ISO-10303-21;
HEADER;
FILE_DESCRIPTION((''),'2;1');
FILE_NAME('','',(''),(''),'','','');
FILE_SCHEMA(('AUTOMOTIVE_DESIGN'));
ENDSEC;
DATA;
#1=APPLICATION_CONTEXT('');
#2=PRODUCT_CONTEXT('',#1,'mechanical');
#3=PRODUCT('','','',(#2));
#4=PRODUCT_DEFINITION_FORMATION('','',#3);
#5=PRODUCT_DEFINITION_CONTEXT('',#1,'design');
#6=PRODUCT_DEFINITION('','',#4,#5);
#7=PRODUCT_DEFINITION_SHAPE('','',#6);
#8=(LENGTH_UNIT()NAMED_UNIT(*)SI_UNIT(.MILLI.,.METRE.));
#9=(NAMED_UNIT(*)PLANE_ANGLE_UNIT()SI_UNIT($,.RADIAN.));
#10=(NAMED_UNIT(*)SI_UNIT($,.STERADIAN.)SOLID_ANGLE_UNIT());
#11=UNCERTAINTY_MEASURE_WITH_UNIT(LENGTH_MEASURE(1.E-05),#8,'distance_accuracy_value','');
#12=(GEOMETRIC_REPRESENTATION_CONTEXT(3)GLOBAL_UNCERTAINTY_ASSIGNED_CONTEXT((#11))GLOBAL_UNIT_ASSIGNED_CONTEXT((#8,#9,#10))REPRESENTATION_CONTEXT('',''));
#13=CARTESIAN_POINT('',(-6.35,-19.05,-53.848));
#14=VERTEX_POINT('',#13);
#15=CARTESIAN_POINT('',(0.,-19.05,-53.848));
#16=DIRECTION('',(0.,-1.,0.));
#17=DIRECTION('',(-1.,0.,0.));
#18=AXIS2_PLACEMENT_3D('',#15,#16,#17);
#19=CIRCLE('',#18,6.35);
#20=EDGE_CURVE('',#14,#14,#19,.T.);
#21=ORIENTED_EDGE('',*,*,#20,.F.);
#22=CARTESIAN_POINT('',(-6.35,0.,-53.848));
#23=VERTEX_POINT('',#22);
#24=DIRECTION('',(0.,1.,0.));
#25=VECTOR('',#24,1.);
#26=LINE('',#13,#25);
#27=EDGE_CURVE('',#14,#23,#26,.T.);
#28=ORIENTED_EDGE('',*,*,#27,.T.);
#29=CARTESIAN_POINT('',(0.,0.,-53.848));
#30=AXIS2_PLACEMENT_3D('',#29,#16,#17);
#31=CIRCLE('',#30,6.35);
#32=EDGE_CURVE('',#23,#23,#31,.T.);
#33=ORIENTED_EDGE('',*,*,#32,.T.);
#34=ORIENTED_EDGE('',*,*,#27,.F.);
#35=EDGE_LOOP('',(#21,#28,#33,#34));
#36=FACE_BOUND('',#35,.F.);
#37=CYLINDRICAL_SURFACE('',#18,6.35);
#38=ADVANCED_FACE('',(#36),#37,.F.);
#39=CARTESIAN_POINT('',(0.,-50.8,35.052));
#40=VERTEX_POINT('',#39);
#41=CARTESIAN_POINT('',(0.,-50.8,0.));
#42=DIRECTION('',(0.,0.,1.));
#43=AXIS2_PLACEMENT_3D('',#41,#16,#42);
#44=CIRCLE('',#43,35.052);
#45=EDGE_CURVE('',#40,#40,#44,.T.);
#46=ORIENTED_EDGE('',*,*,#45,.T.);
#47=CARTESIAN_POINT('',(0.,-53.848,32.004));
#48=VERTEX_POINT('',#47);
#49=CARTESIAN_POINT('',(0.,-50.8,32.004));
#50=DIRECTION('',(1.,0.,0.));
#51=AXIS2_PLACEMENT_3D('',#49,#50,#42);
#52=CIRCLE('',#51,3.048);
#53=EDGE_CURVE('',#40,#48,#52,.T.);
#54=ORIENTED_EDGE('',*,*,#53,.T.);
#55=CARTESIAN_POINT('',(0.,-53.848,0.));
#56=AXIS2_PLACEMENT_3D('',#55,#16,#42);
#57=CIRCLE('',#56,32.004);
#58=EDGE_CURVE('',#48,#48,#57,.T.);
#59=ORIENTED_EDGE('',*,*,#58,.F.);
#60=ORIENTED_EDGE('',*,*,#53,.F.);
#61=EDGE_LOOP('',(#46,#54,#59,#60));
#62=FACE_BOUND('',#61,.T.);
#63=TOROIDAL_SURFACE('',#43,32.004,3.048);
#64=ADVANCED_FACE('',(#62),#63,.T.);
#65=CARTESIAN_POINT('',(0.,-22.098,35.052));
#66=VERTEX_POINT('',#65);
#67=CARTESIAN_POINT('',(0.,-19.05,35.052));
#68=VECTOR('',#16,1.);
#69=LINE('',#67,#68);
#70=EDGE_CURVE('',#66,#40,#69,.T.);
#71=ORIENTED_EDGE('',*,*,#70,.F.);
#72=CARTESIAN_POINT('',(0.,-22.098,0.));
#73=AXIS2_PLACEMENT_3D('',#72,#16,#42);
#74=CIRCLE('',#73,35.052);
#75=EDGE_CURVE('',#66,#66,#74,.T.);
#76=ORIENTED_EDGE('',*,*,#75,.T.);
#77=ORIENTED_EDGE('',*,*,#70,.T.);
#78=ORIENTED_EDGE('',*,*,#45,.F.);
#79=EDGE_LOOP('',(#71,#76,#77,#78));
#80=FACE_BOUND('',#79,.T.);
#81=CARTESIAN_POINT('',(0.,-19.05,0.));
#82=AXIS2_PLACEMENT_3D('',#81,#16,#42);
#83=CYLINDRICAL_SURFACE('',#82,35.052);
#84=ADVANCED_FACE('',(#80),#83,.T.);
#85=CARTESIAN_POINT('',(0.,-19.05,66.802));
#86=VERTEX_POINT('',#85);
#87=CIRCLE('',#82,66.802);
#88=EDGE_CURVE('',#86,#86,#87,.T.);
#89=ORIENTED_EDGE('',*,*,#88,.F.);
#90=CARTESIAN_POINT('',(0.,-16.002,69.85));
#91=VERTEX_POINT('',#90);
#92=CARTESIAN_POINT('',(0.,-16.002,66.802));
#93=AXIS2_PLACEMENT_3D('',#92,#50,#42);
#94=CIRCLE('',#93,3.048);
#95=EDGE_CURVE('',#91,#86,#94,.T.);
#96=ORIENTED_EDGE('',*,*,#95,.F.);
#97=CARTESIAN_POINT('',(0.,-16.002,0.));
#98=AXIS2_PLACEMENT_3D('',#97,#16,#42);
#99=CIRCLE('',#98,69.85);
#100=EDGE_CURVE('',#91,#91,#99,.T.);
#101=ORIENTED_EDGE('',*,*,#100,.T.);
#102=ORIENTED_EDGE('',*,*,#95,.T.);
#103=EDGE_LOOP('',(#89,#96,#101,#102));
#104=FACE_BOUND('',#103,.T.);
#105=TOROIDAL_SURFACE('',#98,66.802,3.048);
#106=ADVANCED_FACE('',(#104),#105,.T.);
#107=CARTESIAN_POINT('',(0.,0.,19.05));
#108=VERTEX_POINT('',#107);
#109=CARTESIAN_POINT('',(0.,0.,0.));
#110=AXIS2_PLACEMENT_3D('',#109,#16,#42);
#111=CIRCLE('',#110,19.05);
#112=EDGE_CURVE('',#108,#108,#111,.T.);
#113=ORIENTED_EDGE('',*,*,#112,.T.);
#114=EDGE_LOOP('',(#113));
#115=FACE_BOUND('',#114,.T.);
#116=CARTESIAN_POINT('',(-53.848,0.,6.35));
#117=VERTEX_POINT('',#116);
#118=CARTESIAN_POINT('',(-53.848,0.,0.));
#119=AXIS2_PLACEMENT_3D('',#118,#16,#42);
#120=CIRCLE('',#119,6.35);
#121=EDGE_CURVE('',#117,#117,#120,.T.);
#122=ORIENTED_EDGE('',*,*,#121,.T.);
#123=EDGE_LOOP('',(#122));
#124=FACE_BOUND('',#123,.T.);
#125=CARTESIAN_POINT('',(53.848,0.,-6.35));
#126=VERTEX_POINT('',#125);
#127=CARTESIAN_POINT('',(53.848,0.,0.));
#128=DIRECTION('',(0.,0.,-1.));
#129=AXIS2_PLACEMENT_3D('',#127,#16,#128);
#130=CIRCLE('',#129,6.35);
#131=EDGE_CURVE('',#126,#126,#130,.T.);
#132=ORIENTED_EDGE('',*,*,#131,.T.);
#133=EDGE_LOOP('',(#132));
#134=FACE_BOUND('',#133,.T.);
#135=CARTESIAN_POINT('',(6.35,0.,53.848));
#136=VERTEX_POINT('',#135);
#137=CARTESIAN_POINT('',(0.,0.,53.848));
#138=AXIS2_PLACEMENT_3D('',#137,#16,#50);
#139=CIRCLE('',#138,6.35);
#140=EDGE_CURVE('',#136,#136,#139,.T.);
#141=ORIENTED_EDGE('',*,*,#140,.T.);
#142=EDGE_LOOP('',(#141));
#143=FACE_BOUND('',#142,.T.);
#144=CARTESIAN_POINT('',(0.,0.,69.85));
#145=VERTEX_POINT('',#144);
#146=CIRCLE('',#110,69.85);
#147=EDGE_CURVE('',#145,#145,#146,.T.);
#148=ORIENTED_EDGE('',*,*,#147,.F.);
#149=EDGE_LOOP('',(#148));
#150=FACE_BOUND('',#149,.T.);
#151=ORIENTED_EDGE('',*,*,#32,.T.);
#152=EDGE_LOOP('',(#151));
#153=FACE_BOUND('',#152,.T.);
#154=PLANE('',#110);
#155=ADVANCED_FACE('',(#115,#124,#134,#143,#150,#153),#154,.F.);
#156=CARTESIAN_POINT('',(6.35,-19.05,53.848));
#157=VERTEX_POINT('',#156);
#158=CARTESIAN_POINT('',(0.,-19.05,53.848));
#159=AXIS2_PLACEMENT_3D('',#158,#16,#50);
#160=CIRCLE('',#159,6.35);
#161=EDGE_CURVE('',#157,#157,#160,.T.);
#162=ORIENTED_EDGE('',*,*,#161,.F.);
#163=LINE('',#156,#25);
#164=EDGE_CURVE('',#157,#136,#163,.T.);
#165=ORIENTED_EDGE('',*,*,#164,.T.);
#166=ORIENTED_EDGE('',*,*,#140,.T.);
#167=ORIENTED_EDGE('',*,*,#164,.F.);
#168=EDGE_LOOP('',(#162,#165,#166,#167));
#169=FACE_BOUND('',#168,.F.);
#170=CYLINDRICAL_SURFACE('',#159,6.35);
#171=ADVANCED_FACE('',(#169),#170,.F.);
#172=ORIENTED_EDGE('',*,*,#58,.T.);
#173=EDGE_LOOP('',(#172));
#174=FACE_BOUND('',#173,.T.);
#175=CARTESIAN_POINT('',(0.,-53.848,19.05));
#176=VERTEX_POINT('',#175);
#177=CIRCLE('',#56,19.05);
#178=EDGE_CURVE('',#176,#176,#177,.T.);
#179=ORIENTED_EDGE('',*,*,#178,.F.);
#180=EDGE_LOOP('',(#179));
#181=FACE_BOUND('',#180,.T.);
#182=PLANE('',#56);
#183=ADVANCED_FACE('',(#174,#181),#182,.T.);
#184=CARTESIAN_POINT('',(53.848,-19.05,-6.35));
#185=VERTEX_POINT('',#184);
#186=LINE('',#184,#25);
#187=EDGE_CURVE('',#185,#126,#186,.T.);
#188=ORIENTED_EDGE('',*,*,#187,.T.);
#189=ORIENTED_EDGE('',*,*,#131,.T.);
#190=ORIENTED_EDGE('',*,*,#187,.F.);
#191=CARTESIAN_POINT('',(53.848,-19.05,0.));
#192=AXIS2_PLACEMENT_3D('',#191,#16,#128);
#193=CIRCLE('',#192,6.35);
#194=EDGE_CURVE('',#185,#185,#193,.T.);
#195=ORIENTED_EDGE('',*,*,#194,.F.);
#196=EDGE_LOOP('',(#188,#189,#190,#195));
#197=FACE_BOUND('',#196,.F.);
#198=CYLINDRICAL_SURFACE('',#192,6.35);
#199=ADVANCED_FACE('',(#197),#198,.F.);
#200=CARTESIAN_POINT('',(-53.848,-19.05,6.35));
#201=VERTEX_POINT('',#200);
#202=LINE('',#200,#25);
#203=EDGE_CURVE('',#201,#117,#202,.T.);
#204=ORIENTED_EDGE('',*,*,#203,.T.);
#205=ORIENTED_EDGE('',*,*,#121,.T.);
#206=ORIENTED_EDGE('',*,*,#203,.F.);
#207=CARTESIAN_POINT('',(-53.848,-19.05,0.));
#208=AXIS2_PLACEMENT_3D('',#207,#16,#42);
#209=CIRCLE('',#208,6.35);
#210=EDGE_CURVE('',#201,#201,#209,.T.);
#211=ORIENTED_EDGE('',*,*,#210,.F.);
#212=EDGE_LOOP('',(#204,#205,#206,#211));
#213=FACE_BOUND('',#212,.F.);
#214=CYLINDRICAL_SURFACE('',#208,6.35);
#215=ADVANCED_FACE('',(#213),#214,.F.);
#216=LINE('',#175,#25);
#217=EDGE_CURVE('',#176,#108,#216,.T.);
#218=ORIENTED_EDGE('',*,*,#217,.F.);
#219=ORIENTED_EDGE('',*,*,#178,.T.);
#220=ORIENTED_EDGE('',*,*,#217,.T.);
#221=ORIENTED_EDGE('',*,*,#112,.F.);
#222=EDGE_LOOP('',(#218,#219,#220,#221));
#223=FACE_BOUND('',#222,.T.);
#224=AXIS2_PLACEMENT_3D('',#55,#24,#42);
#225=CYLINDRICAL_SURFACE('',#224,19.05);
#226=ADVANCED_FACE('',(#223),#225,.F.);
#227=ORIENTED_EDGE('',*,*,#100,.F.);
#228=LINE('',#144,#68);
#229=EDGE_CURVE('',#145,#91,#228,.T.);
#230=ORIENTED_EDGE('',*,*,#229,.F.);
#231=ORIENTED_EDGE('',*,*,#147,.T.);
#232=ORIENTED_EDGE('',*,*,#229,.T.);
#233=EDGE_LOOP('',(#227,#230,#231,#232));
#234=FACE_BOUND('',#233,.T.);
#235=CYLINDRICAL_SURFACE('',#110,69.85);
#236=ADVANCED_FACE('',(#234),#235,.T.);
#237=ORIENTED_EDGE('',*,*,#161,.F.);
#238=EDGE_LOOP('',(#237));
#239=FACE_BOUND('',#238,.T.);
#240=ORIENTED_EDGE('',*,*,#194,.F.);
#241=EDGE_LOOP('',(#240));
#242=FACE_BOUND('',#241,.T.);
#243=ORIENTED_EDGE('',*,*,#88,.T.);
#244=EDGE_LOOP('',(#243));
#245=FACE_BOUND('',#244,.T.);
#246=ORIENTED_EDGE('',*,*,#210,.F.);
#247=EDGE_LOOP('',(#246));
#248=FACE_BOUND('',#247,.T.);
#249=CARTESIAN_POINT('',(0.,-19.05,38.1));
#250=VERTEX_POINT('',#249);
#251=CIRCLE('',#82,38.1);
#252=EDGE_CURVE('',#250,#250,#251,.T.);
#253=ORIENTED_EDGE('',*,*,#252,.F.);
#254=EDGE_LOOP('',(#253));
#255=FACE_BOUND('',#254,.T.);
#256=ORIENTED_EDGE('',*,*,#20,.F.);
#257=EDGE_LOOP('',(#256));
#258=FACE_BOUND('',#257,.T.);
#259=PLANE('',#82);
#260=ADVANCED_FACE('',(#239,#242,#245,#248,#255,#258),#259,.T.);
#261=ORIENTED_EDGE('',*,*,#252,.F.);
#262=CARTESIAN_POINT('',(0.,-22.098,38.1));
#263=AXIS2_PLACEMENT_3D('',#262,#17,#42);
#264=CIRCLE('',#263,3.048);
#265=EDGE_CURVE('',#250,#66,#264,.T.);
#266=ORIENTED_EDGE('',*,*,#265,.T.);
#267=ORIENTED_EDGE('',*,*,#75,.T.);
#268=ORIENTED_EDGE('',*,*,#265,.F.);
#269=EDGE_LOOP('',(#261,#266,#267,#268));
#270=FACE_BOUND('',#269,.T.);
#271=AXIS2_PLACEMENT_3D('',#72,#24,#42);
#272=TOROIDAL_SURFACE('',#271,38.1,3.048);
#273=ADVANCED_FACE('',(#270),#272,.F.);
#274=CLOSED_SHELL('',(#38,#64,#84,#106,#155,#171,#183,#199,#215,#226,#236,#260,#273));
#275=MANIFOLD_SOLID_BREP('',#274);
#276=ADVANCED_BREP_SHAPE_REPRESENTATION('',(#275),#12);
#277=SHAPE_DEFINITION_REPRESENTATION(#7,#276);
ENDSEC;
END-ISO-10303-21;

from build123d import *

# Parameters (mm, degrees)
F2_R            = 3.048
F3_R            = 6.35
F4_DEPTH        = 19.051
F4_COPIES_COUNT = 4


# Not quite as in the source:
# - a pattern or mirror of a feature is missing from the dataset's text; its kind, count and spacing are read off the source's solid


with BuildPart() as f1:
    # F0 (on Right) → F1 (revolve)
    with BuildSketch(Plane.YZ):
        Polygon((-53.848, 19.05), (0, 19.05), (0, 69.85), (-19.05, 69.85), (-19.05, 35.052), (-53.848, 35.052), align=None)
    revolve(axis=Axis((0, -31.5901881313, 0), (0, -1, 0)))

    # F2
    f2_edges = [f1.edges().sort_by_distance(p)[0] for p in [
        (0, -53.848, -35.052),
        (0, -19.05, -35.052),
        (0, -19.05, -69.85),
    ]]
    fillet(f2_edges, radius=F2_R)

    # F3 (on face) → F4 (cut, through all)
    with BuildSketch(Plane.XZ.offset(19.05)):
        with Locations((0, 53.848)):
            Circle(F3_R)
    f4 = extrude(amount=-F4_DEPTH, mode=Mode.SUBTRACT)

    # F4_copies: F4 ×4 about axis
    f4_copies_axis = Axis((0, 0, 0), (0, 1, 0))
    for i in range(1, F4_COPIES_COUNT):
        add(f4.rotate(f4_copies_axis, i * 360 / F4_COPIES_COUNT), mode=Mode.SUBTRACT)


solid = f1.part
